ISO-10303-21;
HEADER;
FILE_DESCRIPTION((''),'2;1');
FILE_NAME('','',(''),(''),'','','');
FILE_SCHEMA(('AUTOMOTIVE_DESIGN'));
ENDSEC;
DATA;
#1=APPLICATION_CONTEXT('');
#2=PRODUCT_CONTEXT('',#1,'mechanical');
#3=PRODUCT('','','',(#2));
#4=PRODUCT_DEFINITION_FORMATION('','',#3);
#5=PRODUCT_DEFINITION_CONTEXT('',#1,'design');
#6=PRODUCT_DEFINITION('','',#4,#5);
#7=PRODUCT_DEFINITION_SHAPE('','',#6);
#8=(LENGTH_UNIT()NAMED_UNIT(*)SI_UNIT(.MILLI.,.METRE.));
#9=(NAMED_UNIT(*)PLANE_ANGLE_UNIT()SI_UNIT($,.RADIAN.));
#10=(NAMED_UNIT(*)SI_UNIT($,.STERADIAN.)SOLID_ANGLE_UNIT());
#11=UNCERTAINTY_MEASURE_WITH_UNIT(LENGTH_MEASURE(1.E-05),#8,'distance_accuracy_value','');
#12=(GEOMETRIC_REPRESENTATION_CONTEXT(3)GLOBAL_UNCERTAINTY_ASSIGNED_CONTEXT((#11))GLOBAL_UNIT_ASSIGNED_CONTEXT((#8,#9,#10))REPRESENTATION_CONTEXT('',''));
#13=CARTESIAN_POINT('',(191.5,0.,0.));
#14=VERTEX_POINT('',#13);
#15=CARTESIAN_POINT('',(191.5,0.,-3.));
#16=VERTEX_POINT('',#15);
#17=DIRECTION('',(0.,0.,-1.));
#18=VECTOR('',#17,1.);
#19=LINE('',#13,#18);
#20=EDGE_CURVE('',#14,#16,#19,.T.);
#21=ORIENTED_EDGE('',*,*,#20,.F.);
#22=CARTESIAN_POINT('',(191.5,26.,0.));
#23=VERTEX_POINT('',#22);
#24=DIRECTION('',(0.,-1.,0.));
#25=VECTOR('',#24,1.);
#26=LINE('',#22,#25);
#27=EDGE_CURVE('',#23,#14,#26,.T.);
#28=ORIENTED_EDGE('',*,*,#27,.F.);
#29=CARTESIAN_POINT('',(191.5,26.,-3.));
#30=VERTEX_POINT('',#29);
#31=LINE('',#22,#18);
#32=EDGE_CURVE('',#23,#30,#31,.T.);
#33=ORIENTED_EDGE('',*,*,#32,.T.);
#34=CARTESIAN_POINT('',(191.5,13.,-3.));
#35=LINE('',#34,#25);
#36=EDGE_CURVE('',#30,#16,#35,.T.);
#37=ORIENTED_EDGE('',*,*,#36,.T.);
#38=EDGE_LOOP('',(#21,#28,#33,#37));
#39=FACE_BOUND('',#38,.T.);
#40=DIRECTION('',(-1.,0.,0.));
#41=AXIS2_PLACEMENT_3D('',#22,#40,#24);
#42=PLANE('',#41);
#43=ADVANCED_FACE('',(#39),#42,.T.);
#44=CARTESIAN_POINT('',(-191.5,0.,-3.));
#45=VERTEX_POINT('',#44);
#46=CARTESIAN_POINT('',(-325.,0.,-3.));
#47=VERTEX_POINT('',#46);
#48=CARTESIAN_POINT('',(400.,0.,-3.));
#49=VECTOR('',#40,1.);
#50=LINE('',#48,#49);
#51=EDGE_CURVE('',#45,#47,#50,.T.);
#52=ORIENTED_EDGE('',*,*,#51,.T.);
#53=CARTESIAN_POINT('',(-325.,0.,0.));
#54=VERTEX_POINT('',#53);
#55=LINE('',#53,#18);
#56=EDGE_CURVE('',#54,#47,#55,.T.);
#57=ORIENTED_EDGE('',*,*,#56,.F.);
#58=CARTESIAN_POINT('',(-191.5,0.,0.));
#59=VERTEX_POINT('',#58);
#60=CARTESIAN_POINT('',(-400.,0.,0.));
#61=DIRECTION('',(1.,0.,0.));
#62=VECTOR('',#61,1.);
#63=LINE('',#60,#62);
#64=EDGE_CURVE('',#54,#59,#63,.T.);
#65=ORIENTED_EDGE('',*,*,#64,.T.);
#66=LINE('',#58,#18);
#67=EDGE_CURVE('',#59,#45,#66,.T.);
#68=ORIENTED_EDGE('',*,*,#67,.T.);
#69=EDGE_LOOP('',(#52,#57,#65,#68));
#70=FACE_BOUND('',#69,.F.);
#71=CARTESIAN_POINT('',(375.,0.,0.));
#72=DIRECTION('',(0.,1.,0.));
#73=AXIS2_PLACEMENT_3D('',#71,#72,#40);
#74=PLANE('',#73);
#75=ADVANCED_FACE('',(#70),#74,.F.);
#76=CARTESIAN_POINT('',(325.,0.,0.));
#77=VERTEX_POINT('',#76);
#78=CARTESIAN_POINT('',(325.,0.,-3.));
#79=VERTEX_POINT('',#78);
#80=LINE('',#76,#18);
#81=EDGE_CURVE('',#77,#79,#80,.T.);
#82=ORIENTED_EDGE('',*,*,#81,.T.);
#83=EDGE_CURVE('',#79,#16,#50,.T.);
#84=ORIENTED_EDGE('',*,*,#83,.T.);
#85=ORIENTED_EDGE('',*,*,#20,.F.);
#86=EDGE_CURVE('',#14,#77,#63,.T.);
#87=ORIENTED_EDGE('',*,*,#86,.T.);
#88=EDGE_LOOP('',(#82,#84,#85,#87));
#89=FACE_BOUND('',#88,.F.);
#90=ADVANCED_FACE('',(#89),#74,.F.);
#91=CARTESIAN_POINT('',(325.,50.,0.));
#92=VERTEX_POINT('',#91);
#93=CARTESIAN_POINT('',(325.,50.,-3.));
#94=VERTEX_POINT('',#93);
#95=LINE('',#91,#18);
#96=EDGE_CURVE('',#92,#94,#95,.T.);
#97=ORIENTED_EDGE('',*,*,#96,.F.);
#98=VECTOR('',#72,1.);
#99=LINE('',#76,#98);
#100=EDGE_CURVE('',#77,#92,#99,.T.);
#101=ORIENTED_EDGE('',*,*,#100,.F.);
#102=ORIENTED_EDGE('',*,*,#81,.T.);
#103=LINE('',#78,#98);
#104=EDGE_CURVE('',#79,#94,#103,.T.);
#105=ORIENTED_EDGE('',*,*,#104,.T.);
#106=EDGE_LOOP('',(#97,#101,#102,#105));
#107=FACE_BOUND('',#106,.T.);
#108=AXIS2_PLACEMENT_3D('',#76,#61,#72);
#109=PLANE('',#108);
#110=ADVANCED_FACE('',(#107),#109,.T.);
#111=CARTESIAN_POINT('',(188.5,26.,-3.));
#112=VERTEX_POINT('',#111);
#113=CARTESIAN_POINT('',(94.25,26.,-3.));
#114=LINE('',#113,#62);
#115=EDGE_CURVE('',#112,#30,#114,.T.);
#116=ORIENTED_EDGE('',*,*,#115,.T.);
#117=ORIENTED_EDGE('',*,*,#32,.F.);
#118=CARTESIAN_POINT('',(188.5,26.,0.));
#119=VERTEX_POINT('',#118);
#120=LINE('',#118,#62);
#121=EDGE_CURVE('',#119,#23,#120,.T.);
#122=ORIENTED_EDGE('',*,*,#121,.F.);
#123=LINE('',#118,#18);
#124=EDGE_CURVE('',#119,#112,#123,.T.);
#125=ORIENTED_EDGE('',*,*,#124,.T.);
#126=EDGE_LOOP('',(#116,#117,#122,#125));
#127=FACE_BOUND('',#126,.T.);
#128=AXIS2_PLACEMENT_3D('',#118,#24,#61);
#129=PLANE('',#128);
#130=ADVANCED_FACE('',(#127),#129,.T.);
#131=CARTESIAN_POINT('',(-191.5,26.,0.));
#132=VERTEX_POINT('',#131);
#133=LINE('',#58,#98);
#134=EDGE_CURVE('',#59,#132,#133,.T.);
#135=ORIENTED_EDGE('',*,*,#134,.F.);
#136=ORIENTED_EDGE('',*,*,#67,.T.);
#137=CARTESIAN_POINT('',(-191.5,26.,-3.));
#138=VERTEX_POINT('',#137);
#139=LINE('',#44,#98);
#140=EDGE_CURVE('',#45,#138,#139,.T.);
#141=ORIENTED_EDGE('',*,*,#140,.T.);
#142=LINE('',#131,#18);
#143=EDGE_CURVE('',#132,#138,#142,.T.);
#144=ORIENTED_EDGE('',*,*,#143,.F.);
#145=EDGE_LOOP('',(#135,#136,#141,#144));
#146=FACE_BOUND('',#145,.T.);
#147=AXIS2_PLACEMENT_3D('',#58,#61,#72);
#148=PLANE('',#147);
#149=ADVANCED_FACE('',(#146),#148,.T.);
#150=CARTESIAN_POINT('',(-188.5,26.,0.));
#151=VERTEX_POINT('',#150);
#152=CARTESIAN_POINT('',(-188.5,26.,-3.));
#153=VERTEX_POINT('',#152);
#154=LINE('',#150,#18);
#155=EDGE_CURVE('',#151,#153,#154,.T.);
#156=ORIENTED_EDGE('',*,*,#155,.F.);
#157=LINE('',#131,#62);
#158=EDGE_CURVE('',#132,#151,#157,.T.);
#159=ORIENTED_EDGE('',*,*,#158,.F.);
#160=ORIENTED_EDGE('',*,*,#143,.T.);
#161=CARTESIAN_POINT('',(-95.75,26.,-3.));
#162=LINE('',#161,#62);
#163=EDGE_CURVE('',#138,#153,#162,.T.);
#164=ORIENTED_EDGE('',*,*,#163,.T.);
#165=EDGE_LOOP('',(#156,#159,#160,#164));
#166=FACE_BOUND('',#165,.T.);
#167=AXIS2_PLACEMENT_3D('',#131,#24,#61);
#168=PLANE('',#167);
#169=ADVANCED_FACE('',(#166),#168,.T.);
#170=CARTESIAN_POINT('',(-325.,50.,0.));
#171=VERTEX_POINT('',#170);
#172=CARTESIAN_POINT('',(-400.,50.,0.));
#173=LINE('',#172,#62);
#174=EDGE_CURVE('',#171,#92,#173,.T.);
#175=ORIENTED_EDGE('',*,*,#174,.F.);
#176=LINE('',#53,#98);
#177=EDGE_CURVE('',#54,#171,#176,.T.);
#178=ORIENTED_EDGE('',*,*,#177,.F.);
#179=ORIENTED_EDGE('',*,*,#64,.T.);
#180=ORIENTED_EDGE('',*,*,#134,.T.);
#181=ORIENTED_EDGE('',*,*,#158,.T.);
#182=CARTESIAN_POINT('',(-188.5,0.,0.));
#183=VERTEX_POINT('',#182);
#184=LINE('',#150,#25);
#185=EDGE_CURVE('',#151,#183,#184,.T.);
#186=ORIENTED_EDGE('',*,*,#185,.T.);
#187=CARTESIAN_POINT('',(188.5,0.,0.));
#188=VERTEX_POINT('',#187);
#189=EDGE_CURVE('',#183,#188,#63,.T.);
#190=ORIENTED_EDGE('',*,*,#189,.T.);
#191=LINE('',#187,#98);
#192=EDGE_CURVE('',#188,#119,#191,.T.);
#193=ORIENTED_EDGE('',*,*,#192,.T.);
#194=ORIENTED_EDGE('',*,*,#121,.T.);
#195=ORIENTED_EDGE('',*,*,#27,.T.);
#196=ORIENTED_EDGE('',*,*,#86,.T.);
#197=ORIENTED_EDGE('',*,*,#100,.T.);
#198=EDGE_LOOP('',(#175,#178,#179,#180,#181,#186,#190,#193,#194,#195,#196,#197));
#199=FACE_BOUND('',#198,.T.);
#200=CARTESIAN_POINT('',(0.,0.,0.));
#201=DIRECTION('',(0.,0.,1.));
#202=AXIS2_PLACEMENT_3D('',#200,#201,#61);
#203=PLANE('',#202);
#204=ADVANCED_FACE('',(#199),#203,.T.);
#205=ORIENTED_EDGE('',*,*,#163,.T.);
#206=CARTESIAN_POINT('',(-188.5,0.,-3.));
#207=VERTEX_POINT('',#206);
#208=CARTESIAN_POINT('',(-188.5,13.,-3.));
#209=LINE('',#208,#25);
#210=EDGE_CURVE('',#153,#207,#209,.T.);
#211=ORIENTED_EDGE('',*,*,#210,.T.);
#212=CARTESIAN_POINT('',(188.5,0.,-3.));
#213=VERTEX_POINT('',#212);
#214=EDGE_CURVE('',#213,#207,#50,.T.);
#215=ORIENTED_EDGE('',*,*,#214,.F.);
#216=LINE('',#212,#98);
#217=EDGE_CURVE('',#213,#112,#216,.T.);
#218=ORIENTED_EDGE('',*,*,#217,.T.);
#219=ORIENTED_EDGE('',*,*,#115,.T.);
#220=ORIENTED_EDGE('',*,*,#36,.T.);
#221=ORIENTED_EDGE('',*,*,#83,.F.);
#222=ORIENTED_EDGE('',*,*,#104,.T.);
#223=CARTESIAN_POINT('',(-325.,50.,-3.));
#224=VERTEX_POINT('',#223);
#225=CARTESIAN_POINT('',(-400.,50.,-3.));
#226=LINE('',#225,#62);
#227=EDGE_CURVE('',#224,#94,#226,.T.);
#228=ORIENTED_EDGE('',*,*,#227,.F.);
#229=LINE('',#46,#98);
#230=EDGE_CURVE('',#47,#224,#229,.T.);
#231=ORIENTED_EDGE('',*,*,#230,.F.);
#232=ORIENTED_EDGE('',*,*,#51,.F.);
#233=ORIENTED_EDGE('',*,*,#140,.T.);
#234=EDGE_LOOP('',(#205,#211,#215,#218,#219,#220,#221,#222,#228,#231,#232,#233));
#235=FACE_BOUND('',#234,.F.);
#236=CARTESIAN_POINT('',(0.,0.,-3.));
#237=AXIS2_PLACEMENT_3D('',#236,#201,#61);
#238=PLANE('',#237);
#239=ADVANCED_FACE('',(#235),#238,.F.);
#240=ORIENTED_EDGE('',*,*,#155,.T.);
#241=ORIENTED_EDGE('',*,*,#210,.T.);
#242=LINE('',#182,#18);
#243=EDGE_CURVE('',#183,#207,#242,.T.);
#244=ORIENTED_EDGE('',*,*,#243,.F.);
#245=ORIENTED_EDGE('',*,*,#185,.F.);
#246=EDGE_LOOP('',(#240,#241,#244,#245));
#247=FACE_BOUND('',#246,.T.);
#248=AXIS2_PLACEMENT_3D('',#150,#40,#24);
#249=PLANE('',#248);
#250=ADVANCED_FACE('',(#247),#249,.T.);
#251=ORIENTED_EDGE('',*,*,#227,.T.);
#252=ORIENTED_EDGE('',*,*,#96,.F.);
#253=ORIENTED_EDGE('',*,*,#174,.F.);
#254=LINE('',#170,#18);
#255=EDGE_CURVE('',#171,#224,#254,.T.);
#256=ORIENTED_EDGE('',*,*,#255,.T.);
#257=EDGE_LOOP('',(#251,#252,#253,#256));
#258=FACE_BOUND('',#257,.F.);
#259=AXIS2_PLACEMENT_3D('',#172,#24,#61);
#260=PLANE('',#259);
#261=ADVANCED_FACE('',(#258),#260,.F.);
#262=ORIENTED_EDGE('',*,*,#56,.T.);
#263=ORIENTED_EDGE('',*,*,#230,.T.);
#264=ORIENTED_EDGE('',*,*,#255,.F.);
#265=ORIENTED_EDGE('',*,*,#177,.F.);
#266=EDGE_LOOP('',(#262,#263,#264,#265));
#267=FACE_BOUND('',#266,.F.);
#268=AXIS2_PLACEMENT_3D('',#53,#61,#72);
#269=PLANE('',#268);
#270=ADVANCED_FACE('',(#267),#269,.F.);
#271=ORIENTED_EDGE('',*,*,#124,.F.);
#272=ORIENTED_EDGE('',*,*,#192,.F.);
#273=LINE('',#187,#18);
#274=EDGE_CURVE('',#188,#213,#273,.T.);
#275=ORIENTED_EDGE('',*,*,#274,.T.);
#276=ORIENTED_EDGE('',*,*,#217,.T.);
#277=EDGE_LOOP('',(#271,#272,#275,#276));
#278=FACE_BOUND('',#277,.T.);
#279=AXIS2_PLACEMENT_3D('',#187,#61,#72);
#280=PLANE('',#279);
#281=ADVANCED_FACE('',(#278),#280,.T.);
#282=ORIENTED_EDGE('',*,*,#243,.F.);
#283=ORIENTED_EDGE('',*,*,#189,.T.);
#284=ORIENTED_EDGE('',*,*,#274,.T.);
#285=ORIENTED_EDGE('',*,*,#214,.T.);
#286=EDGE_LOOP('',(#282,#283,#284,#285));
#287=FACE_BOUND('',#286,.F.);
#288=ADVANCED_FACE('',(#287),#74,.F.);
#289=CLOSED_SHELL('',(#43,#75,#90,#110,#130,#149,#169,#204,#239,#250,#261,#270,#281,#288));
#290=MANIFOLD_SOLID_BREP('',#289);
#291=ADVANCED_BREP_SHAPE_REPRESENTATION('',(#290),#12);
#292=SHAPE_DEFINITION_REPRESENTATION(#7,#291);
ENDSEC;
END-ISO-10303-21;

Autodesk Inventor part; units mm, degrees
ref_plane "YZ Plane" through (0, 0, 0) normal (1, 0, 0) x (0, 1, 0)
ref_plane "XZ Plane" through (0, 0, 0) normal (0, 1, 0) x (-1, 0, 0)
ref_plane "XY Plane" through (0, 0, 0) normal (0, 0, 1) x (1, 0, 0)
sketch "Sketch1" plane through (0, 0, 0) normal (0, 0, 1) x (1, 0, 0)
  line L0 (-400, 50) -> (400, 50)
  line L1 (400, 50) -> (400, 0)
  line L2 (400, 0) -> (-400, 0)
  line L3 (-400, 0) -> (-400, 50)
  circle A0 centre (-400, 0) radius 25
  circle A1 centre (400, 0) radius 25
  point P0 (0, 0)
  point P1 (0, 0)
  point P2 (-400, 25)
  point P3 (-375, 0)
  point P4 (375, 0)
  point P5 (400, 25)
  dimension "d16" = 50
  dimension "d17" = 800
  dimension "d18" = 50
  dimension "d19" = 50
extrude "Plate2" add sketch "Sketch1" against normal blind 3 contours L0 L1 A1 L2 A0 L3 | A0 L2 L3 | L1 L2 A1 picked at (-388.289, 11.711) picked at (398.1457, 16.4577)
sketch "Sketch2" plane through (0, 0, 0) normal (0, 0, 1) x (1, 0, 0)
  line L0 (400, 50) -> (-400, 50) projected
  line L1 (190, 50) -> (190, 0) construction
  line L2 (-400, 0) -> (400, 0) projected
  line L3 (188.5, 26) -> (191.5, 26)
  line L4 (191.5, 26) -> (191.5, 0)
  line L5 (191.5, 0) -> (188.5, 0)
  line L6 (188.5, 0) -> (188.5, 26)
  line L7 (-190, 0) -> (-190, 50) construction
  line L8 (-191.5, 26) -> (-188.5, 26)
  line L9 (-188.5, 26) -> (-188.5, 0)
  line L10 (-188.5, 0) -> (-191.5, 0)
  line L11 (-191.5, 0) -> (-191.5, 26)
  point P0 (0, 0)
  point P1 (0, 0)
  point P2 (188.5, 0)
  point P3 (191.5, 0)
  point P4 (0, 0)
  dimension "d21" = 190
  dimension "d22" = 3
  dimension "d23" = 26
  dimension "d26" = 190
  dimension "d27" = 26
  dimension "d28" = 3
extrude "Extrusion1" cut sketch "Sketch2" against normal blind 10
sketch "Sketch3" plane through (0, 0, 0) normal (0, 0, 1) x (1, 0, 0)
  line L0 (188.5, 0) -> (188.5, 26) projected
  line L1 (188.5, 26) -> (191.5, 26) projected
  line L2 (191.5, 26) -> (191.5, 0) projected
  line L3 (191.5, 0) -> (400, 0) projected
  line L4 (400, 0) -> (400, 50) projected
  line L5 (400, 50) -> (-400, 50) projected
  line L6 (-400, 50) -> (-400, 0) projected
  line L7 (-400, 0) -> (-191.5, 0) projected
  line L8 (-191.5, 0) -> (-191.5, 26) projected
  line L9 (-191.5, 26) -> (-188.5, 26) projected
  line L10 (-188.5, 26) -> (-188.5, 0) projected
  line L11 (-188.5, 0) -> (188.5, 0) projected
  line L12 (325, 0) -> (325, 50)
  line L13 (400, 50) -> (-400, 50) projected
  line L14 (-325, 0) -> (-325, 50)
  point P0 (0, 0)
  point P1 (325, 50)
  dimension "d29" = 75
  dimension "d30" = 75
extrude "Extrusion2" cut sketch "Sketch3" against normal through all contours L12 L5 L4 L3 | L7 L6 L5 L14
sketch "Sketch4" plane through (0, 0, -3) normal (0, 0, -1) x (-1, 0, 0)
  line L0 (-62.455, 14.7345) -> (-62.455, 33.3208) construction
  line L1 (-62.455, 33.3208) -> (59.5733, 33.3208) construction
  line L2 (59.5733, 33.3208) -> (59.5733, 14.7345) construction
  line L3 (59.5733, 14.7345) -> (-62.455, 14.7345) construction
  point P0 (0, 0)
mark "Mark1"
equation "\"d22\" = Thickness"
equation "\"d26\" = d21"
equation "\"d27\" = d23"
equation "\"d28\" = Thickness"
equation "\"d30\" = d29"
equation "\"d20\" = Thickness"
equation "\"BendReliefWidth\" = Thickness"
equation "\"BendReliefDepth\" = 0.5 * Thickness"
equation "\"CornerReliefSize\" = 4 * Thickness"
equation "\"MinimumRemnant\" = 2 * Thickness"
equation "\"TransitionRadius\" = BendRadius"
equation "\"JacobiRadiusSize\" = BendRadius"
equation "\"GapSize\" = Thickness"
equation "\"Thickness\" = 3"
equation "\"BendRadius\" = 5"
properties part number "MSC 109 rib cone" material "Stainless Steel"
